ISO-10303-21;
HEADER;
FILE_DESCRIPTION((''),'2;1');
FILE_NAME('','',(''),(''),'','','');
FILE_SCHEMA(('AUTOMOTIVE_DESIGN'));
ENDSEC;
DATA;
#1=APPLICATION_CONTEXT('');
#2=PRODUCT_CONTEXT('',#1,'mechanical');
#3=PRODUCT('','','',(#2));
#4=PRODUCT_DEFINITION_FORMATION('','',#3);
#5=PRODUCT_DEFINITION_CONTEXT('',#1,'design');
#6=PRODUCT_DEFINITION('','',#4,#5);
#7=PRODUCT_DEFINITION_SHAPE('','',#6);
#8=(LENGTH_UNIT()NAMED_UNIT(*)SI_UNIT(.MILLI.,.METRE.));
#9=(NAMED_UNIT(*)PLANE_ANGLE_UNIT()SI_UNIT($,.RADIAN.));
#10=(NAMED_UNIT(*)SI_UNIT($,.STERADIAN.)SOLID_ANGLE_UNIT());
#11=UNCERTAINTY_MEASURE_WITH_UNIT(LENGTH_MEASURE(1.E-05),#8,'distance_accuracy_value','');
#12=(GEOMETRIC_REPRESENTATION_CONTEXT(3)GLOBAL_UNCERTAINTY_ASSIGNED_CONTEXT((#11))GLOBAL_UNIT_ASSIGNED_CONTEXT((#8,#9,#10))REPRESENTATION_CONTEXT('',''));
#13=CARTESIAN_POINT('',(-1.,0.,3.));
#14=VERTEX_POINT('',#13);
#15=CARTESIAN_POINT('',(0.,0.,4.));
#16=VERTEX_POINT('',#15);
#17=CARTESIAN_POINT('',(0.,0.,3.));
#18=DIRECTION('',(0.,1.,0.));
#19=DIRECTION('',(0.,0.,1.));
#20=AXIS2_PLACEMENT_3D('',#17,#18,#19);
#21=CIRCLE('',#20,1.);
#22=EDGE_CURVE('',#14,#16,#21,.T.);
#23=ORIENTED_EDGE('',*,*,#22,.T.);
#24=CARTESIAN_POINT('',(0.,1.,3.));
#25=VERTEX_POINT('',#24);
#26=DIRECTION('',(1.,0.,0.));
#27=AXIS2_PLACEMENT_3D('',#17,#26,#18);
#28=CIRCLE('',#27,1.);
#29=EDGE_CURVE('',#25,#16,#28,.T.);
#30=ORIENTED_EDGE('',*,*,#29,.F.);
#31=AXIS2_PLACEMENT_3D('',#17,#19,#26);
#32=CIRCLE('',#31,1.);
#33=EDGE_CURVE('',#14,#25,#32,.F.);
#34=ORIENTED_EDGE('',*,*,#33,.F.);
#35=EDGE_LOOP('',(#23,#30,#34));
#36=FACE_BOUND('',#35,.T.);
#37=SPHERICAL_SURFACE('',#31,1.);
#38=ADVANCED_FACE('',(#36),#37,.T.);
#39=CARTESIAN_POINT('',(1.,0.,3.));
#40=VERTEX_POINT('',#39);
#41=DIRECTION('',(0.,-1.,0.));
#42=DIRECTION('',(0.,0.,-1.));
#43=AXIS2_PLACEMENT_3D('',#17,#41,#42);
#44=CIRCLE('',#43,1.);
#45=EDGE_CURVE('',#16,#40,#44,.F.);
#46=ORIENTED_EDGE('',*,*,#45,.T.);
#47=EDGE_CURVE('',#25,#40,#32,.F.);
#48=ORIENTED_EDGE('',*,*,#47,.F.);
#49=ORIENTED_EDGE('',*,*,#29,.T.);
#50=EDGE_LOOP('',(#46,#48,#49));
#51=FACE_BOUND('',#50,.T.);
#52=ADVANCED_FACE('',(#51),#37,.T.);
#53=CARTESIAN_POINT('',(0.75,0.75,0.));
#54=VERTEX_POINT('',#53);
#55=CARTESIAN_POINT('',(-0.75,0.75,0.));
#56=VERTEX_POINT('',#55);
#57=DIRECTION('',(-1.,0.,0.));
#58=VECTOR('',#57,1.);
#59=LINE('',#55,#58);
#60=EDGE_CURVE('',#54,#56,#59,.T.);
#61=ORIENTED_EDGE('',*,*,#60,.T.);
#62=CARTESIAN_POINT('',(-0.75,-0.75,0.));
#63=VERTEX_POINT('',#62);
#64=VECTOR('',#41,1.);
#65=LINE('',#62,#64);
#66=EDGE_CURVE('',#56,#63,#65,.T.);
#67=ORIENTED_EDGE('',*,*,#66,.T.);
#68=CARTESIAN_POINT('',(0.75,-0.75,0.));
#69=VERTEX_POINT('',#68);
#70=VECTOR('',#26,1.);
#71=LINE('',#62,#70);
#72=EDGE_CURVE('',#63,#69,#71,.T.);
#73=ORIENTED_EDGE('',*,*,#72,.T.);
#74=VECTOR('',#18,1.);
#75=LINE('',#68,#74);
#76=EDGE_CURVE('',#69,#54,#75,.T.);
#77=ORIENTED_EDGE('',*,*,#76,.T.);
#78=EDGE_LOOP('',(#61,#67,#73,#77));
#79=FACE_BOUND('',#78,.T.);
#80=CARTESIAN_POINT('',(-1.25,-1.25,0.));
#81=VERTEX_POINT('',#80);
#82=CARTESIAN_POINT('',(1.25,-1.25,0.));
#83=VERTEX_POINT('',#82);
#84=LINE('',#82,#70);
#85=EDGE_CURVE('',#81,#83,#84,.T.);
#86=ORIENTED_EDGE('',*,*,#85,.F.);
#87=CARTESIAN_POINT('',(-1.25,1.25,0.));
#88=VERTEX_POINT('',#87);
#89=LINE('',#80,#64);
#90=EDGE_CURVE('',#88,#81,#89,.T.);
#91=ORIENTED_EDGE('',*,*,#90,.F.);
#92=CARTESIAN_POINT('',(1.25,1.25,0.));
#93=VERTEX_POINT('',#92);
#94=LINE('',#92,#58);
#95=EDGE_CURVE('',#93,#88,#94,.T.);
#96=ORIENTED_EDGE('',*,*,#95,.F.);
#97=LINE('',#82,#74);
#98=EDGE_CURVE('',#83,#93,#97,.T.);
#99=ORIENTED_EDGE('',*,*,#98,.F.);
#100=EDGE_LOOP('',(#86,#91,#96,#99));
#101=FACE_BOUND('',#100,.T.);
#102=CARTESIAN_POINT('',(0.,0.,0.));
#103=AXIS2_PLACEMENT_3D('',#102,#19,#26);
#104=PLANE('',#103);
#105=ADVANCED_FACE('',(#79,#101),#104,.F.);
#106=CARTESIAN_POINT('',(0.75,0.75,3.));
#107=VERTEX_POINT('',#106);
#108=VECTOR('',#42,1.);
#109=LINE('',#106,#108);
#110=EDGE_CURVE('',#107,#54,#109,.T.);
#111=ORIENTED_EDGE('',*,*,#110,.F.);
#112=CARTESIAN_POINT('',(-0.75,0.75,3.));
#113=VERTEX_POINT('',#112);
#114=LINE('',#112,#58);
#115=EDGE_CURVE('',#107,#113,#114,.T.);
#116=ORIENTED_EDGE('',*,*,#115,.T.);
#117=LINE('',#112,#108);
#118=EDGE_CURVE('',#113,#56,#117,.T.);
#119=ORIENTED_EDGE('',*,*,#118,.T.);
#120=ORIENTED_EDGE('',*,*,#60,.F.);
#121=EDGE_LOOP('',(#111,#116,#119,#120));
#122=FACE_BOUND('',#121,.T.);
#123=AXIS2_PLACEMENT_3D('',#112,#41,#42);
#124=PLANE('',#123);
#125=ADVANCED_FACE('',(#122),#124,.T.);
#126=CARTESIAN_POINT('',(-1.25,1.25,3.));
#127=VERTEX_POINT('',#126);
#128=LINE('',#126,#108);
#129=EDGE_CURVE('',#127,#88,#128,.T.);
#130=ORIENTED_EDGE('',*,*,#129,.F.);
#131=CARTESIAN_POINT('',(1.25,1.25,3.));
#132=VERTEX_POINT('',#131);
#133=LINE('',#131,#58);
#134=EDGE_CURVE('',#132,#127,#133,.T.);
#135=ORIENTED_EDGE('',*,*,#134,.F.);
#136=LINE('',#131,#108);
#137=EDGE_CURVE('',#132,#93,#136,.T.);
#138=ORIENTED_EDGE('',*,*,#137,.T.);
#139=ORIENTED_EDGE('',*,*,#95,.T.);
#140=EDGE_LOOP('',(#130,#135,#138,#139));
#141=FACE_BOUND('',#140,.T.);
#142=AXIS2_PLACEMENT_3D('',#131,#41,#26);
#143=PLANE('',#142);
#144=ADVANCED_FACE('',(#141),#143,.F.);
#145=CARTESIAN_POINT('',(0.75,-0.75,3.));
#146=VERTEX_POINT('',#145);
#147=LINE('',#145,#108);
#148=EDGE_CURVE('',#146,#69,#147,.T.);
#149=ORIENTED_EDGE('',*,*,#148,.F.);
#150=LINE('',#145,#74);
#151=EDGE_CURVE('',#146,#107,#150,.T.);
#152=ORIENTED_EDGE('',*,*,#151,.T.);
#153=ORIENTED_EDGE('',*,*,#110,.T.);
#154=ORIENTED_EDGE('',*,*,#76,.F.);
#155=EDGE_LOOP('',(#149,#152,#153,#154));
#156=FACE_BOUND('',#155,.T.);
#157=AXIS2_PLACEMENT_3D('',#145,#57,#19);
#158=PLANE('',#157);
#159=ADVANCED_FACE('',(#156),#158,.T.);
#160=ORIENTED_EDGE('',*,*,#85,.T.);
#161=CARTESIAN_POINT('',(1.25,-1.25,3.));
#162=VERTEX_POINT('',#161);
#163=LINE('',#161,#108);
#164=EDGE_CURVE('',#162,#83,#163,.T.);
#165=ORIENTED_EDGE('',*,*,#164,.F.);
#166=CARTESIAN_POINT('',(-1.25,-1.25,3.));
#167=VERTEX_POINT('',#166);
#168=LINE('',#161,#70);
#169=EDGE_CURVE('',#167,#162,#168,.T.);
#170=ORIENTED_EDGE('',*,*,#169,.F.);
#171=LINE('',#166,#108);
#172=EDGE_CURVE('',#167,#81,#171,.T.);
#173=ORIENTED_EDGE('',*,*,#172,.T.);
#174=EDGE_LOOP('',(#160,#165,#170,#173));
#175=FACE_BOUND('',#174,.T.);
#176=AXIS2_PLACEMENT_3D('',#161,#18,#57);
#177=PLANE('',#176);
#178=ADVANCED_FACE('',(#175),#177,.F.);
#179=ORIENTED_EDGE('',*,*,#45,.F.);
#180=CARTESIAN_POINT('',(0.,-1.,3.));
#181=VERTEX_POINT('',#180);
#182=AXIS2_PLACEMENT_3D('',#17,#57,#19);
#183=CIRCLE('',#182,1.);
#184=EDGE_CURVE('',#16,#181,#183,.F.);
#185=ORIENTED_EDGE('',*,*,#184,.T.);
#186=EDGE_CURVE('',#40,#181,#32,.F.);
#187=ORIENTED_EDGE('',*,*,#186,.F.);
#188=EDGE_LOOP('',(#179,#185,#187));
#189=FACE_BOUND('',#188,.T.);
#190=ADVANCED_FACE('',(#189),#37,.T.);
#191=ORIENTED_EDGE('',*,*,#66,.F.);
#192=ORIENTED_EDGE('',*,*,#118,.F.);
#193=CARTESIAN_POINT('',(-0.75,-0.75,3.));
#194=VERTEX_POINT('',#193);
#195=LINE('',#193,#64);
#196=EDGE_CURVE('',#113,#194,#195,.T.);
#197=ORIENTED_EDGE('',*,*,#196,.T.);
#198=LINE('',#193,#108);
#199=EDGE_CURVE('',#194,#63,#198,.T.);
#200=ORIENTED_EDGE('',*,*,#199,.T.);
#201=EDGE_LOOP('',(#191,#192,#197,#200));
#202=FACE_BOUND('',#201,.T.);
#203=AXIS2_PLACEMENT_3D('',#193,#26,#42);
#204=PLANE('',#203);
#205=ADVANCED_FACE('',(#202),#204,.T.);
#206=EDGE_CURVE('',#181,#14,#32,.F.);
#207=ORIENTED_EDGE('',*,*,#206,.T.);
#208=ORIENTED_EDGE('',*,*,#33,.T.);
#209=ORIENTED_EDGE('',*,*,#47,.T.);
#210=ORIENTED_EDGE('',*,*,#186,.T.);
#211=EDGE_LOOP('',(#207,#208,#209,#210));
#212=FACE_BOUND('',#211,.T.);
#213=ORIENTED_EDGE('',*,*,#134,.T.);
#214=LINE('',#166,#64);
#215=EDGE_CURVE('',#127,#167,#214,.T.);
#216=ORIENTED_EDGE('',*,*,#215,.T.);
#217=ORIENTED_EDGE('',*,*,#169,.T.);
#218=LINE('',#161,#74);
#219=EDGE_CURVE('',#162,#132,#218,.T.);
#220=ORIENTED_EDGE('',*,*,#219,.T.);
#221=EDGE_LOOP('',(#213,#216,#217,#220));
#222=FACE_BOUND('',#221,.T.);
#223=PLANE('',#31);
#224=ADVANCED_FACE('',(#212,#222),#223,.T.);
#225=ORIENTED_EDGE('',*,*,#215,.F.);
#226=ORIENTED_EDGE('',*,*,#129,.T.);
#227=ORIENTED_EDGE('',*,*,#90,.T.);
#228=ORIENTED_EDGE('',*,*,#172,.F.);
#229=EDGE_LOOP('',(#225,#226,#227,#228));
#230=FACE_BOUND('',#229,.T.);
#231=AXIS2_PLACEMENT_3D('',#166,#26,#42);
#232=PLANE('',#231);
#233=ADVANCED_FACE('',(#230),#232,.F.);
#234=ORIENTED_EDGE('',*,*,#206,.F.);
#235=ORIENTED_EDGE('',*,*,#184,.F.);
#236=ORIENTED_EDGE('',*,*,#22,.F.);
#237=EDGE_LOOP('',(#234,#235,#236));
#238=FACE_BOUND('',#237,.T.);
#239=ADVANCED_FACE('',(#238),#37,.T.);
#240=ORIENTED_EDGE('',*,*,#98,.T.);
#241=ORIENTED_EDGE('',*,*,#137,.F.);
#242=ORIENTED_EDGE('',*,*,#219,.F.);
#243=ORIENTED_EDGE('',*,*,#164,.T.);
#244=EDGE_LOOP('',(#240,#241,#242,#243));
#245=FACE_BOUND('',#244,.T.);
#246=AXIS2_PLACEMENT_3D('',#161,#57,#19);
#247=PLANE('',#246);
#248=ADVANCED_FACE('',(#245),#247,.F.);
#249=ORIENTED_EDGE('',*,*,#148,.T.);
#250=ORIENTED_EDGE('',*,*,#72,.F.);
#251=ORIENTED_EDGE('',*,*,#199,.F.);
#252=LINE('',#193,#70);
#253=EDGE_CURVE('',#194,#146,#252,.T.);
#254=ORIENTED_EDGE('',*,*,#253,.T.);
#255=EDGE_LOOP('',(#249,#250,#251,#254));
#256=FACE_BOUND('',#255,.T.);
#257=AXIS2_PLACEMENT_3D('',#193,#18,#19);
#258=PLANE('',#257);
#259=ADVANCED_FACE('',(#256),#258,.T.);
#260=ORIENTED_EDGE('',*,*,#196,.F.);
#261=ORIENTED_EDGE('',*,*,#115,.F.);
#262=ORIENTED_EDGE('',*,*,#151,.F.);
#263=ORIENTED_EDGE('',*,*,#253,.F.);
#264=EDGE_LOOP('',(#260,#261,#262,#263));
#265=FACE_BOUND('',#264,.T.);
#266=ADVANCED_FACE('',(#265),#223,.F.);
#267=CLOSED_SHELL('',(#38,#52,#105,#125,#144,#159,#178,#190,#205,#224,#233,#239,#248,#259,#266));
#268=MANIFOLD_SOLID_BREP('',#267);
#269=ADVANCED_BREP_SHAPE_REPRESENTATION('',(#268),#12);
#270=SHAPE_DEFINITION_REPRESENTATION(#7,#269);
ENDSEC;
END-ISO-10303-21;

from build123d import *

# Parameters (mm, degrees)
SKETCH1_W           = 2.5
SKETCH1_H           = 2.5
SKETCH1_W_2         = 1.5
SKETCH1_H_2         = 1.5
BOSS_EXTRUDE1_DEPTH = 3
SKETCH2_W           = 2
SKETCH2_H           = 2
BOSS_EXTRUDE3_DEPTH = 1
FILLET1_R           = 1
FILLET2_R           = 1


# Some blends are built 0.0001 mm under size
with BuildPart() as part:
    # Sketch1 → Boss-Extrude1 (new body)
    with BuildSketch(Plane.XY):
        Rectangle(SKETCH1_W, SKETCH1_H)
        Rectangle(SKETCH1_W_2, SKETCH1_H_2, mode=Mode.SUBTRACT)
    extrude(amount=BOSS_EXTRUDE1_DEPTH)

    # Sketch2 → Boss-Extrude3 (add)
    with BuildSketch(Plane.XY.offset(3)):
        Rectangle(SKETCH2_W, SKETCH2_H)
    extrude(amount=BOSS_EXTRUDE3_DEPTH)

    # Fillet1
    fillet1_edges = [part.edges().sort_by_distance(p)[0] for p in [
        (0, -1, 4),
        (1, 0, 4),
        (0, 1, 4),
        (-1, 0, 4),
    ]]
    fillet(fillet1_edges, radius=FILLET1_R - 0.0001)  # a hair under: the kernel refuses the full size

    # Fillet2
    # the kernel refuses this fillet: 1 mm, written as the material it takes off along each edge
    with BuildSketch(Plane(origin=(0, 0, 4), x_dir=(1, 0, 0), z_dir=(0, -1, 0))) as fillet2_piece_1:
        with BuildLine():
            CenterArc((0.0001, -0.9999), 0.9999, 0, 90)
            Line((1, -0.9999), (1, 0))
            Line((1, 0), (0.0001, 0))
        make_face()
    revolve(axis=Axis((0, 0, 4), (0, 0, 1)), revolution_arc=90, mode=Mode.SUBTRACT)
    with BuildSketch(Plane(origin=(0, 0, 4), x_dir=(0, -1, 0), z_dir=(-1, 0, 0))) as fillet2_piece_2:
        with BuildLine():
            CenterArc((0.0001, -0.9999), 0.9999, 0, 90)
            Line((1, -0.9999), (1, 0))
            Line((1, 0), (0.0001, 0))
        make_face()
    revolve(axis=Axis((0, 0, 4), (0, 0, 1)), revolution_arc=90, mode=Mode.SUBTRACT)
    with BuildSketch(Plane(origin=(0, 0, 4), x_dir=(-1, 0, 0), z_dir=(0, 1, 0))) as fillet2_piece_3:
        with BuildLine():
            CenterArc((0.0001, -0.9999), 0.9999, 0, 90)
            Line((1, -0.9999), (1, 0))
            Line((1, 0), (0.0001, 0))
        make_face()
    revolve(axis=Axis((0, 0, 4), (0, 0, 1)), revolution_arc=90, mode=Mode.SUBTRACT)
    with BuildSketch(Plane(origin=(0, 0, 4), x_dir=(0, 1, 0), z_dir=(1, 0, 0))) as fillet2_piece_4:
        with BuildLine():
            CenterArc((0.0001, -0.9999), 0.9999, 0, 90)
            Line((1, -0.9999), (1, 0))
            Line((1, 0), (0.0001, 0))
        make_face()
    revolve(axis=Axis((0, 0, 4), (0, 0, 1)), revolution_arc=90, mode=Mode.SUBTRACT)
    with BuildSketch(Plane(origin=(-1, 1, 3), x_dir=(0, -1, 0), z_dir=(0, 0, 1)), Plane(origin=(-1, -1, 3), x_dir=(1, 0, 0), z_dir=(0, 0, 1))) as fillet2_piece_5:
        with BuildLine():
            CenterArc((FILLET2_R, FILLET2_R), FILLET2_R, 180, 90)
            Line((0, FILLET2_R), (0, 0))
            Line((0, 0), (FILLET2_R, 0))
        make_face()
    extrude(amount=1, mode=Mode.SUBTRACT)
    with BuildSketch(Plane(origin=(1, -1, 3), x_dir=(-1, 0, 0), z_dir=(0, 0, 1)), Plane(origin=(1, 1, 3), x_dir=(0, -1, 0), z_dir=(0, 0, 1))) as fillet2_piece_6:
        with BuildLine():
            CenterArc((FILLET2_R, -FILLET2_R), FILLET2_R, 90, 90)
            Line((0, -FILLET2_R), (0, 0))
            Line((0, 0), (FILLET2_R, 0))
        make_face()
    extrude(amount=1, mode=Mode.SUBTRACT)


solid = part.part
